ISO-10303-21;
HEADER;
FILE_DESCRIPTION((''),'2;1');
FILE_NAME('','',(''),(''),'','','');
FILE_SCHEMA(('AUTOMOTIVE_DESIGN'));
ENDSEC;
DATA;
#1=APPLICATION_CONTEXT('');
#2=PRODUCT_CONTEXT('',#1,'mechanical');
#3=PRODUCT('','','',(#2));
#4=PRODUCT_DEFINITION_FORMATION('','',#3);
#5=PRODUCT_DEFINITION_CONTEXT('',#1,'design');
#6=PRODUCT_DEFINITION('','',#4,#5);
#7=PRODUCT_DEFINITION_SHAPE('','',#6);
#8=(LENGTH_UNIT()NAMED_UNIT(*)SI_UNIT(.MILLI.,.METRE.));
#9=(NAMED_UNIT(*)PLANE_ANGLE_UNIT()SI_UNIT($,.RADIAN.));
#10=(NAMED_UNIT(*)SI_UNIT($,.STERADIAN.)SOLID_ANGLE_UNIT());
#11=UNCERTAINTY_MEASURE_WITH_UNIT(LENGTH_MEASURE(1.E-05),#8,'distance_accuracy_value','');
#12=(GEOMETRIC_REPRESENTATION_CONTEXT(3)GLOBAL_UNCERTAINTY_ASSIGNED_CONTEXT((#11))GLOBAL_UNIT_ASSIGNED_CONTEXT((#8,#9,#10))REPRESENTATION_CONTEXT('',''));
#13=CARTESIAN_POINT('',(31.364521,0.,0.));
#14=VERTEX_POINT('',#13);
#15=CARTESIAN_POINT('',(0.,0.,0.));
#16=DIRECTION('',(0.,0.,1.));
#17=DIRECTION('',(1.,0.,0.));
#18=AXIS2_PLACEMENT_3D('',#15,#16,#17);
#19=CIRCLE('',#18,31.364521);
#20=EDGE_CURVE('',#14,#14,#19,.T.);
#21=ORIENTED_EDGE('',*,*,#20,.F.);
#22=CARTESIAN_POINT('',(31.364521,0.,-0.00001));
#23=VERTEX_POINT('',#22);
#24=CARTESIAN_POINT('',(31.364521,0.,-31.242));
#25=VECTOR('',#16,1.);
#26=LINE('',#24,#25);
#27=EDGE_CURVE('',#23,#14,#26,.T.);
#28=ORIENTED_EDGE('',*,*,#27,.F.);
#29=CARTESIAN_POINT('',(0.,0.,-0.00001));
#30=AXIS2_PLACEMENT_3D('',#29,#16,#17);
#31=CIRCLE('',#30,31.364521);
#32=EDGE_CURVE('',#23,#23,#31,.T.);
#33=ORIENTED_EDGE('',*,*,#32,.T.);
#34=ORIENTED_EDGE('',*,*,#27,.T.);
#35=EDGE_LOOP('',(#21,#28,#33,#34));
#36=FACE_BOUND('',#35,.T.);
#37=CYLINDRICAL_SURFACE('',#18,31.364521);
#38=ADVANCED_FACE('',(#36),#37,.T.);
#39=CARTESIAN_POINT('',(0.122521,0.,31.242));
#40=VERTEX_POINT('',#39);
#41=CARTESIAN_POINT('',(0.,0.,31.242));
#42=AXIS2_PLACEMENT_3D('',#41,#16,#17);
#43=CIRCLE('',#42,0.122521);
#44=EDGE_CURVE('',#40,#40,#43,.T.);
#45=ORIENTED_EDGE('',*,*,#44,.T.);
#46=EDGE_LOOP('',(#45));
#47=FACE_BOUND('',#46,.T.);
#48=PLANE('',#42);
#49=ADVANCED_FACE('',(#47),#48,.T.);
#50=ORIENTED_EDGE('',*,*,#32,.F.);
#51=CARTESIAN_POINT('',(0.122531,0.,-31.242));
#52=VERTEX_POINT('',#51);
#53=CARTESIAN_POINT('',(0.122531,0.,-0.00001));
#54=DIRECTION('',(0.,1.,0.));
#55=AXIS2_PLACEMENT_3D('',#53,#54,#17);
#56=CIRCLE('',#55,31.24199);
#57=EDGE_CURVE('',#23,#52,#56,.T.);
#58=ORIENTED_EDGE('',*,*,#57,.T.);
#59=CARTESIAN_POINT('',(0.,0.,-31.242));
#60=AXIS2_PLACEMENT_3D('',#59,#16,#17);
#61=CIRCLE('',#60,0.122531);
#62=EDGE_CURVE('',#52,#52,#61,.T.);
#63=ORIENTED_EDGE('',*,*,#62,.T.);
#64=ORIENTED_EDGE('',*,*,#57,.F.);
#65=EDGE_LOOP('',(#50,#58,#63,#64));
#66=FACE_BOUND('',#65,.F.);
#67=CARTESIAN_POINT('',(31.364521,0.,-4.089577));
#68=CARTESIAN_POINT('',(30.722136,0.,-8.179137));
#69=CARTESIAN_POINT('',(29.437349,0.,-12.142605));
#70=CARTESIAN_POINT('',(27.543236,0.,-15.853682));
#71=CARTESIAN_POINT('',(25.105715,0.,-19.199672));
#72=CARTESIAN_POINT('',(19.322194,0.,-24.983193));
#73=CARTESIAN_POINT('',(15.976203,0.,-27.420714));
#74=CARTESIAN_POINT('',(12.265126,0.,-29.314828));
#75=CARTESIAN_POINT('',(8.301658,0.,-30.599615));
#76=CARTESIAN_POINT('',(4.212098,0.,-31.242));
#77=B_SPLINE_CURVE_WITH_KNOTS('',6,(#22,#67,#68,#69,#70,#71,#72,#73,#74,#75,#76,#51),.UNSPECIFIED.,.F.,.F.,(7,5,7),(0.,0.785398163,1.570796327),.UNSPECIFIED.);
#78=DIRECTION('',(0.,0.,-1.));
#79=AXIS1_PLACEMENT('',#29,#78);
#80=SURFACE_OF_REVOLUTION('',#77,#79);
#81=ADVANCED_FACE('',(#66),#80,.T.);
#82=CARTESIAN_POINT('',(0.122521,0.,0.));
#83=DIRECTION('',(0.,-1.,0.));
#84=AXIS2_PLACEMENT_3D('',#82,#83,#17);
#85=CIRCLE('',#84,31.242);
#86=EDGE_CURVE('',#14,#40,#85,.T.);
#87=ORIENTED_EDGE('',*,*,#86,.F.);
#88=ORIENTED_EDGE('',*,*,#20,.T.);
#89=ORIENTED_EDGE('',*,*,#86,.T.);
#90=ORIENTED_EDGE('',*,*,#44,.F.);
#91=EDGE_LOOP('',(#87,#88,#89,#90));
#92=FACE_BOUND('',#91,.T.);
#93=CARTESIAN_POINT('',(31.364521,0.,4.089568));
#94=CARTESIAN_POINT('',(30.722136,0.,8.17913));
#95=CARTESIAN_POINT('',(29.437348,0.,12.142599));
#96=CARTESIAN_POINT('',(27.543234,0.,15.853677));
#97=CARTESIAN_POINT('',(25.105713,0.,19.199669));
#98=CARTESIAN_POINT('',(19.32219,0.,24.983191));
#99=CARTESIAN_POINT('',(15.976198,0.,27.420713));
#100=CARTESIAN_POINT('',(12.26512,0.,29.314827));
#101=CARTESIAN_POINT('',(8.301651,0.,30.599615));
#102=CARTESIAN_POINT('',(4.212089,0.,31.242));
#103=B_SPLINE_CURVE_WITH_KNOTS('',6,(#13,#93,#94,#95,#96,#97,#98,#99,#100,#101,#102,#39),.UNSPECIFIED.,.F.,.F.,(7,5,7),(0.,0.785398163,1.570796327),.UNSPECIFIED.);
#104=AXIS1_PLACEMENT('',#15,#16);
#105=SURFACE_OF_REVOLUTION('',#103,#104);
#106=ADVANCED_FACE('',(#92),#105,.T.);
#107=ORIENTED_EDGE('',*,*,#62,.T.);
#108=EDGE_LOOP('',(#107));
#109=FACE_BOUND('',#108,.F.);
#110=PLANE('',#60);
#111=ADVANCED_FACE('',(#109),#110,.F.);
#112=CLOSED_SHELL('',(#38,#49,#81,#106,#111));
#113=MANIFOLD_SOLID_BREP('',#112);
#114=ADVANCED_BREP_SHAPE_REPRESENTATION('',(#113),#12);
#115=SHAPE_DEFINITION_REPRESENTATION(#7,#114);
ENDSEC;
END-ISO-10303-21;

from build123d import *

# Parameters (mm, degrees)
F0_R     = 31.3645212613
F1_DEPTH = 31.242
F2_R     = 31.242
F3_R     = 31.24199


# Not quite as in the source:
# - a fillet or chamfer is up to 0.001 mm smaller than in the source, because OpenCascade refuses the exact size


with BuildPart() as f1:
    # F0 (on Top) → F1 (new body, symmetric)
    with BuildSketch(Plane.XY):
        Circle(F0_R)
    extrude(amount=F1_DEPTH, both=True)

    # F2
    f2_edges = [f1.edges().sort_by_distance(p)[0] for p in [
        (-31.364521, 0, 31.242),
    ]]
    fillet(f2_edges, radius=F2_R)

    # F3 (radius 31.242 in the source; OpenCascade refuses exactly that, so slightly less here)
    f3_edges = [f1.edges().sort_by_distance(p)[0] for p in [
        (-31.364521, 0, -31.242),
    ]]
    fillet(f3_edges, radius=F3_R)


solid = f1.part
